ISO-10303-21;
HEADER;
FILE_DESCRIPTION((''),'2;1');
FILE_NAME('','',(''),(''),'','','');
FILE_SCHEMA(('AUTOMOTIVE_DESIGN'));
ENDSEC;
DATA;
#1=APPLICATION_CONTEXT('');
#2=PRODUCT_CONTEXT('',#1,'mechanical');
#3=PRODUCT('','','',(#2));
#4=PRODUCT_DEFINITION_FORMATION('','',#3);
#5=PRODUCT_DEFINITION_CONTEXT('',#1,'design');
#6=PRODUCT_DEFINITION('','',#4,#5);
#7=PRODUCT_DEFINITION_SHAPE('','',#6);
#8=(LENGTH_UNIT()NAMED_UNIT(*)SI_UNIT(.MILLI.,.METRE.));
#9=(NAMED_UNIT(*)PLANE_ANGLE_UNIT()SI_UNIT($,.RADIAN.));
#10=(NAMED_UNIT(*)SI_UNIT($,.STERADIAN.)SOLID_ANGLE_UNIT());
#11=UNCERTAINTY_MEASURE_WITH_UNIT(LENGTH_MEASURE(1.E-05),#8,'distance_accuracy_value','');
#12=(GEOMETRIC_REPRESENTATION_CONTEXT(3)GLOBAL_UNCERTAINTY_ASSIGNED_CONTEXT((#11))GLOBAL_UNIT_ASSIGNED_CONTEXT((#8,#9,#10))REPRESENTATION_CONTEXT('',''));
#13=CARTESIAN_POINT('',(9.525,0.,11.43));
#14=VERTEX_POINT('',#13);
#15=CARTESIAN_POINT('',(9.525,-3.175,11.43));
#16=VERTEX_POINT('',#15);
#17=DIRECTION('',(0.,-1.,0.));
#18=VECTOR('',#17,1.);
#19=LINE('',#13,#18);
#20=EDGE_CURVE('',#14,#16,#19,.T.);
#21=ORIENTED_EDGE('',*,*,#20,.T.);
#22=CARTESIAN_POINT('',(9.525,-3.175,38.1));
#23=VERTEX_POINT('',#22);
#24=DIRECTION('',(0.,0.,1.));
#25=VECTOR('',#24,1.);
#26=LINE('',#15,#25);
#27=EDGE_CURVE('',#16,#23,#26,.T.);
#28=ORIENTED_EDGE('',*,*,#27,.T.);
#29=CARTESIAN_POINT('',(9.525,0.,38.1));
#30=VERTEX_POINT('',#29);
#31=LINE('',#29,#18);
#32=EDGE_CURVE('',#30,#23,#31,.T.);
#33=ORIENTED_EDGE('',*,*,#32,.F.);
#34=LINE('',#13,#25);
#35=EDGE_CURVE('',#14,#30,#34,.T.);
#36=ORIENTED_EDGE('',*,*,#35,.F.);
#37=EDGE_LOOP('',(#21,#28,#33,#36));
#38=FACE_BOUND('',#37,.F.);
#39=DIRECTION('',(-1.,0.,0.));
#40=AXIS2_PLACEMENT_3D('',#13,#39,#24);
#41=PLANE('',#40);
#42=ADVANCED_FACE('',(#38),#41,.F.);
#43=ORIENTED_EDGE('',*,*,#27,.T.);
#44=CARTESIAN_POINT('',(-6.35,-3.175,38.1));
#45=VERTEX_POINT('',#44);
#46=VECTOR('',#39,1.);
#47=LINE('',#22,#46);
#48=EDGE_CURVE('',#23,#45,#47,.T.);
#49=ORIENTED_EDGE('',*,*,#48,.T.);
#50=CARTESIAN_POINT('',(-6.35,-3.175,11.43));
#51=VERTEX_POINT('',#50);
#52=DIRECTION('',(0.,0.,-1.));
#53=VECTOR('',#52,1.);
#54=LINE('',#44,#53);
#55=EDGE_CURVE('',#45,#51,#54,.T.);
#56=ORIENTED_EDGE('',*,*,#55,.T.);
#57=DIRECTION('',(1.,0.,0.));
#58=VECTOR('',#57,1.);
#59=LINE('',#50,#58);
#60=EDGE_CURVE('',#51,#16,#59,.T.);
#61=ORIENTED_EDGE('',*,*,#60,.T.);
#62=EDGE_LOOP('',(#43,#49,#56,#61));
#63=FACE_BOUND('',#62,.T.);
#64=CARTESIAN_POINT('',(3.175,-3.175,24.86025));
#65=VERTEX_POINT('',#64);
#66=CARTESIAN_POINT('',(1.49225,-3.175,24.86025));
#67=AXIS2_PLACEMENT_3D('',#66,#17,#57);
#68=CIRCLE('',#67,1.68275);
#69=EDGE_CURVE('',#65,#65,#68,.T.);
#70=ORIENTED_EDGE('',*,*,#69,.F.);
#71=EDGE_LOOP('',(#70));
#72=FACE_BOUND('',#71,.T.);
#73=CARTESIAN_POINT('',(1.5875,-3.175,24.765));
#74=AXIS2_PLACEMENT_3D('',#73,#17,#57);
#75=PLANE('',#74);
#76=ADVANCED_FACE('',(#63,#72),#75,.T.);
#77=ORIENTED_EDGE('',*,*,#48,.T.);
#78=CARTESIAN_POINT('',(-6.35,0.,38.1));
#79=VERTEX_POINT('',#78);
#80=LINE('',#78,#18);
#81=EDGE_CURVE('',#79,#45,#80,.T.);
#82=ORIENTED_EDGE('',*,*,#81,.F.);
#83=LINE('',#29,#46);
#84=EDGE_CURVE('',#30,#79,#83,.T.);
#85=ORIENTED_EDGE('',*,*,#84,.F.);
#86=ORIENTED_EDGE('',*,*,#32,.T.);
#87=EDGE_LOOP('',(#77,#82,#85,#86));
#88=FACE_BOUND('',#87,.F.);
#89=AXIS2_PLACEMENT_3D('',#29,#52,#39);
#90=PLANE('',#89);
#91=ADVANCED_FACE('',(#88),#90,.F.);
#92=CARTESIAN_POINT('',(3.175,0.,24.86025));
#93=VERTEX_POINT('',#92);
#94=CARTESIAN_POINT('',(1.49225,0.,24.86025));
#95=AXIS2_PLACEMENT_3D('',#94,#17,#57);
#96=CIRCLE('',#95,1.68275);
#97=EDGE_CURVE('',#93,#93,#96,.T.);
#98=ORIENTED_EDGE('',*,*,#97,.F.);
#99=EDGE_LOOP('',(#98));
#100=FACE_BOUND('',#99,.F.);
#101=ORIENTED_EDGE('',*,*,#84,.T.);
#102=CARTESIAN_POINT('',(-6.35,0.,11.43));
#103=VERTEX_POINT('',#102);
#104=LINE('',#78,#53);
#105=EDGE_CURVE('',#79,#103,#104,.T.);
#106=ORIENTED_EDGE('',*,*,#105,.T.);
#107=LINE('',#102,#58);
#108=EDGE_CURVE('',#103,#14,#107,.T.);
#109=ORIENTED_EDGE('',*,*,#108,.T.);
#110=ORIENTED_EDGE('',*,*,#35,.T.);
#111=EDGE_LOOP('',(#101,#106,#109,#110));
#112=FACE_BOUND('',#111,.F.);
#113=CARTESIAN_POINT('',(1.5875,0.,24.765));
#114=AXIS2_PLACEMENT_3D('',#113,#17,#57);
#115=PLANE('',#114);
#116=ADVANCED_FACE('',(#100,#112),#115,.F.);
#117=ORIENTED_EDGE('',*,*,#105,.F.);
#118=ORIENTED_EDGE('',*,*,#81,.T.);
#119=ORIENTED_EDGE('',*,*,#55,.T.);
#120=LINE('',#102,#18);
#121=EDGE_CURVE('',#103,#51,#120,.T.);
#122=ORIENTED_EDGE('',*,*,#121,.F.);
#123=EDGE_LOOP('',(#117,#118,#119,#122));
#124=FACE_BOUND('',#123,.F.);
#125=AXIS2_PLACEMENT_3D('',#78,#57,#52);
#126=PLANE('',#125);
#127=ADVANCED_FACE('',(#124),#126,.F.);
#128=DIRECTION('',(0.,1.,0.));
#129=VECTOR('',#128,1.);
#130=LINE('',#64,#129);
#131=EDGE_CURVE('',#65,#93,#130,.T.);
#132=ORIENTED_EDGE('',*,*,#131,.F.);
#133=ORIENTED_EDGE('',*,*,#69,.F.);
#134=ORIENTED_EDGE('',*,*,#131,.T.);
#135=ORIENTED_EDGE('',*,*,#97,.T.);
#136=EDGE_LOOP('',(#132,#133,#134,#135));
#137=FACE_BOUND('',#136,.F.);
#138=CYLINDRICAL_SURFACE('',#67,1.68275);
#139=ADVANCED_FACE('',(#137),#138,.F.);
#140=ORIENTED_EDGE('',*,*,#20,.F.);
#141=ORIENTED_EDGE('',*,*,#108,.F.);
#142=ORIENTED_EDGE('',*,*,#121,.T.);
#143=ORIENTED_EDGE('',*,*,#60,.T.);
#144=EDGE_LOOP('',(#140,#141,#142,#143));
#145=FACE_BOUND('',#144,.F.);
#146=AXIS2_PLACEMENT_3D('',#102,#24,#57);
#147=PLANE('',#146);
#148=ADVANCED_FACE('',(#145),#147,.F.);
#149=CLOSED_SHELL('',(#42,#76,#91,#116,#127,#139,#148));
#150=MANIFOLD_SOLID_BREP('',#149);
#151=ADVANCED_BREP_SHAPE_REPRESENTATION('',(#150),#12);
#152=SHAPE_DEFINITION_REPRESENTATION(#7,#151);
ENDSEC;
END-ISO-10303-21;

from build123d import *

# Parameters (mm, degrees)
F1_DEPTH = 3.175
F2_R     = 1.68275
F3_DEPTH = 3.176


# Not quite as in the source:
# - a feature names something its author has since deleted; it is built from what else it names


with BuildPart() as f1:
    # F0 (on Front) → F1 (new body)
    with BuildSketch(Plane.XZ):
        Polygon((9.525, 11.43), (9.525, 38.1), (-6.35, 38.1), (-6.35, 29.21), (-6.35, 20.32), (-6.35, 11.43), align=None)
    extrude(amount=F1_DEPTH)

    # F2 (on face) → F3 (cut, through all)
    with BuildSketch(Plane.XZ.offset(3.175)):
        with Locations((1.49225, 24.86025)):
            Circle(F2_R)
    extrude(amount=-F3_DEPTH, mode=Mode.SUBTRACT)


solid = f1.part
